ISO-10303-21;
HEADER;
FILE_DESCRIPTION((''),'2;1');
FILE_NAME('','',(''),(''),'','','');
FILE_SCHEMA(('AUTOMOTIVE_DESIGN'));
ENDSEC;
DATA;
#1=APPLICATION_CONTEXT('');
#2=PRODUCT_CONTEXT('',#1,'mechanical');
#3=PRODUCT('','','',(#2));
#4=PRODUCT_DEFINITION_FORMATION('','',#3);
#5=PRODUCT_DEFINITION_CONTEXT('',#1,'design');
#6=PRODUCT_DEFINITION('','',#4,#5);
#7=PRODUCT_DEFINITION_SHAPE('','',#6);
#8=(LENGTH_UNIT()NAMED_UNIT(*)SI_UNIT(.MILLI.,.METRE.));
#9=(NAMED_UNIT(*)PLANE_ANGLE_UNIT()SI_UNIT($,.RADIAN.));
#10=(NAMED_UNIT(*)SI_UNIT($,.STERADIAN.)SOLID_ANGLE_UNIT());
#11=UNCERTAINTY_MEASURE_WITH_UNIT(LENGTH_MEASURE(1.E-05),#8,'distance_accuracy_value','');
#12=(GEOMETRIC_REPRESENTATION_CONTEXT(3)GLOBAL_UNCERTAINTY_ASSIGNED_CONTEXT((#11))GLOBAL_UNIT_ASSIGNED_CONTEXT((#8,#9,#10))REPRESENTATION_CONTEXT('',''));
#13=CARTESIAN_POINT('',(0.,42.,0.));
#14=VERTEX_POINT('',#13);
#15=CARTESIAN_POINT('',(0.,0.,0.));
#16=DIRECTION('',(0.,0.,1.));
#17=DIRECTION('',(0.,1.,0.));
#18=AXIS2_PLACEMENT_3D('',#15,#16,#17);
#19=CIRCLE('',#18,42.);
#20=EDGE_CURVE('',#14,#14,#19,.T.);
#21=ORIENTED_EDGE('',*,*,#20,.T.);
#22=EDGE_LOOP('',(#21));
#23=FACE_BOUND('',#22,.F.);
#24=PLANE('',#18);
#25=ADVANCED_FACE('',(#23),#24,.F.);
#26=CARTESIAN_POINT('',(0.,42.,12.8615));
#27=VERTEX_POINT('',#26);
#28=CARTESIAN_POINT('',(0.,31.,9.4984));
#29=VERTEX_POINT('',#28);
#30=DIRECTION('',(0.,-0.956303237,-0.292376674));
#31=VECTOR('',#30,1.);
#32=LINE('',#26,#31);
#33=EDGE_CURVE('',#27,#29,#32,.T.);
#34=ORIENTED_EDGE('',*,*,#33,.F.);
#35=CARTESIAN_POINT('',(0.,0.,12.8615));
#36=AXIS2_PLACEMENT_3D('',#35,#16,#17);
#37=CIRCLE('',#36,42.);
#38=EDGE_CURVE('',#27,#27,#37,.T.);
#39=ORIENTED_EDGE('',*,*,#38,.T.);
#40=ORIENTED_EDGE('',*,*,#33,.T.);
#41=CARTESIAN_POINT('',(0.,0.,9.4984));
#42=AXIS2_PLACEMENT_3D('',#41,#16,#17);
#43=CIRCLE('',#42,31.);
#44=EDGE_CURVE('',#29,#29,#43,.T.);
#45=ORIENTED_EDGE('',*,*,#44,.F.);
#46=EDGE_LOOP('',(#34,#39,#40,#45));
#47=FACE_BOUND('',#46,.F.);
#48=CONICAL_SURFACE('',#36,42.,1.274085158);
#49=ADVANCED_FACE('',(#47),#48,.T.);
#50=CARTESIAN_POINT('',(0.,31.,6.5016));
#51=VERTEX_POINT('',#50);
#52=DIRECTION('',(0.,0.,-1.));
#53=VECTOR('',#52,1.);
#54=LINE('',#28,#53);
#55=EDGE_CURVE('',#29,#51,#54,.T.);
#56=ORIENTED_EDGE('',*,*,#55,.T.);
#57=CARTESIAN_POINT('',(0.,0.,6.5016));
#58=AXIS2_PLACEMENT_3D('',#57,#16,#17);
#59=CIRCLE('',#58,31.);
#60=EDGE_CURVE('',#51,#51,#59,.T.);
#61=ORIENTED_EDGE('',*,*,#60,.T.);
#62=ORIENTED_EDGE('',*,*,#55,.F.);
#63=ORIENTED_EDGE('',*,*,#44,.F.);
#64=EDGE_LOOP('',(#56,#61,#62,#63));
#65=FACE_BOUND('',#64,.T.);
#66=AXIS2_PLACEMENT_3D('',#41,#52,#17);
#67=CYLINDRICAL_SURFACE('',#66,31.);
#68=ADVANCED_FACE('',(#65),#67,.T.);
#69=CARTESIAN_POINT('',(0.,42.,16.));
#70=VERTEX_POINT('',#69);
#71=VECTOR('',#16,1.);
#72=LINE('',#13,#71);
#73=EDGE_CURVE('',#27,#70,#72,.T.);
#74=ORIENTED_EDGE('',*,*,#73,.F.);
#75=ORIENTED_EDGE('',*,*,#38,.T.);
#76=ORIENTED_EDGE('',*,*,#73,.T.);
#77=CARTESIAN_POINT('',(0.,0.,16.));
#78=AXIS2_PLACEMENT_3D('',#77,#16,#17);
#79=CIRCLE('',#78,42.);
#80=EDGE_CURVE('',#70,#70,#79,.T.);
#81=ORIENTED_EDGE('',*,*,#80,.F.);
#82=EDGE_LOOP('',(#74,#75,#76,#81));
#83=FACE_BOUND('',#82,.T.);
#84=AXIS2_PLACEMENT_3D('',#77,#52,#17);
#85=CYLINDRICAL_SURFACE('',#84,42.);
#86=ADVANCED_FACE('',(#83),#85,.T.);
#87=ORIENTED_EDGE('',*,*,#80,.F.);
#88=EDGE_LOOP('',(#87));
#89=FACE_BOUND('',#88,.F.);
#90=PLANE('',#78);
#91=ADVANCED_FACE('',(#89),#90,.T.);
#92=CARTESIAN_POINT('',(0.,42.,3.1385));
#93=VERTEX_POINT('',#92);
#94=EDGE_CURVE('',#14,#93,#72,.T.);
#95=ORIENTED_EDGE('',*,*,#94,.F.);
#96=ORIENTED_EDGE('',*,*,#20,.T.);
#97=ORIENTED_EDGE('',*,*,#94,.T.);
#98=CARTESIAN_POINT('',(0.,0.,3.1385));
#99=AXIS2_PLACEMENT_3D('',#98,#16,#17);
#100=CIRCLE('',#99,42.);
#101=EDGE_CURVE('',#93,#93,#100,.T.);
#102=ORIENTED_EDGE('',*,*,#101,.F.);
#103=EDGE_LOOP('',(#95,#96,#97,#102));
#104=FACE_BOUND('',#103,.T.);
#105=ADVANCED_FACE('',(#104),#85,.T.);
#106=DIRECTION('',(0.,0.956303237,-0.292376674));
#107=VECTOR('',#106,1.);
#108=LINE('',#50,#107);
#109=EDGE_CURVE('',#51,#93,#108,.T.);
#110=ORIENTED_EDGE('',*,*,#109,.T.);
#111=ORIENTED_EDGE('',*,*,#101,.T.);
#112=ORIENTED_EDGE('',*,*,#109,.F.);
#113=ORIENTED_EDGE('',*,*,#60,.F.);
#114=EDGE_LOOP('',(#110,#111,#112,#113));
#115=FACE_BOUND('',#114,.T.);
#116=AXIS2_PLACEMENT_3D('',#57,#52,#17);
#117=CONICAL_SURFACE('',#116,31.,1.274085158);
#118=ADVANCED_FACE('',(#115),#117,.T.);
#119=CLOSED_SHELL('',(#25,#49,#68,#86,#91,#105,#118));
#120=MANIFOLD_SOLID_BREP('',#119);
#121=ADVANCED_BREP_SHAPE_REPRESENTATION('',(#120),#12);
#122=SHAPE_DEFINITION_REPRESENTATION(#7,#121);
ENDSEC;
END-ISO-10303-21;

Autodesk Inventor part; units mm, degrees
ref_plane "YZ Plane" through (0, 0, 0) normal (1, 0, 0) x (0, 1, 0)
ref_plane "XZ Plane" through (0, 0, 0) normal (0, 1, 0) x (-1, 0, 0)
sketch "Main Sketch" plane through (0, 0, 0) normal (1, 0, 0) x (0, 1, 0)
  line L0 (0, 16) -> (42, 16)
  line L1 (42, 16) -> (42, 12.8615)
  line L2 (42, 12.8615) -> (31, 9.4984)
  line L3 (31, 9.4984) -> (31, 6.5016)
  line L4 (31, 6.5016) -> (42, 3.1385)
  line L5 (42, 3.1385) -> (42, 0)
  line L6 (42, 0) -> (0, 0)
  line L7 (40, 12.25) -> (40, 3.75) construction
  line L8 (31, 8) -> (40, 8) construction
  line L9 (42, 12.8615) -> (42, 3.1385)
  line L10 (0, -4) -> (0, 24) projected
  line L11 (0, 0) -> (0, 16)
  dimension "d0" = 8.5
  dimension "d1" = 34
  dimension "d2" = 2
  dimension "d6" = 16
  dimension "d21" = 80
  dimension "d25" = 11
  dimension "d27" = 8
ref_plane "Belt Plane" through (0, 31, 8) normal (0, 0, 1) x (1, 0, 0)
revolve "Body" add sketch "Main Sketch" angle 360 about axis through (0, 0, -10) along (0, 0, 1)
revolve "Groove" cut sketch "Main Sketch" angle 360 about axis through (0, 0, -10) along (0, 0, 1) contours L9 L4 L3 L2
fillet "Fillet External" [suppressed]
fillet "Fillet Internal" [suppressed]
pattern_of_one "Groove Pattern"
equation "\"d0\" = da_Bw"
equation "\"d1\" = da_Alfa"
equation "\"d2\" = da_c"
equation "\"d21\" = da_Dw"
equation "\"d25\" = da_Hd"
equation "\"d27\" = da_Se"
equation "\"da_r1\" = 0"
equation "\"da_r2\" = 0"
equation "\"d18\" = da_Sg"
equation "\"d5\" = da_Se"
equation "\"da_Bw\" = 8.5"
equation "\"da_Alfa\" = 34deg"
equation "\"da_c\" = 2"
equation "\"da_Dw\" = 80"
equation "\"da_Hd\" = 11"
equation "\"da_Se\" = 8"
equation "\"da_Sg\" = 12"
properties part number "Grooved Pulley2" material "Steel"
